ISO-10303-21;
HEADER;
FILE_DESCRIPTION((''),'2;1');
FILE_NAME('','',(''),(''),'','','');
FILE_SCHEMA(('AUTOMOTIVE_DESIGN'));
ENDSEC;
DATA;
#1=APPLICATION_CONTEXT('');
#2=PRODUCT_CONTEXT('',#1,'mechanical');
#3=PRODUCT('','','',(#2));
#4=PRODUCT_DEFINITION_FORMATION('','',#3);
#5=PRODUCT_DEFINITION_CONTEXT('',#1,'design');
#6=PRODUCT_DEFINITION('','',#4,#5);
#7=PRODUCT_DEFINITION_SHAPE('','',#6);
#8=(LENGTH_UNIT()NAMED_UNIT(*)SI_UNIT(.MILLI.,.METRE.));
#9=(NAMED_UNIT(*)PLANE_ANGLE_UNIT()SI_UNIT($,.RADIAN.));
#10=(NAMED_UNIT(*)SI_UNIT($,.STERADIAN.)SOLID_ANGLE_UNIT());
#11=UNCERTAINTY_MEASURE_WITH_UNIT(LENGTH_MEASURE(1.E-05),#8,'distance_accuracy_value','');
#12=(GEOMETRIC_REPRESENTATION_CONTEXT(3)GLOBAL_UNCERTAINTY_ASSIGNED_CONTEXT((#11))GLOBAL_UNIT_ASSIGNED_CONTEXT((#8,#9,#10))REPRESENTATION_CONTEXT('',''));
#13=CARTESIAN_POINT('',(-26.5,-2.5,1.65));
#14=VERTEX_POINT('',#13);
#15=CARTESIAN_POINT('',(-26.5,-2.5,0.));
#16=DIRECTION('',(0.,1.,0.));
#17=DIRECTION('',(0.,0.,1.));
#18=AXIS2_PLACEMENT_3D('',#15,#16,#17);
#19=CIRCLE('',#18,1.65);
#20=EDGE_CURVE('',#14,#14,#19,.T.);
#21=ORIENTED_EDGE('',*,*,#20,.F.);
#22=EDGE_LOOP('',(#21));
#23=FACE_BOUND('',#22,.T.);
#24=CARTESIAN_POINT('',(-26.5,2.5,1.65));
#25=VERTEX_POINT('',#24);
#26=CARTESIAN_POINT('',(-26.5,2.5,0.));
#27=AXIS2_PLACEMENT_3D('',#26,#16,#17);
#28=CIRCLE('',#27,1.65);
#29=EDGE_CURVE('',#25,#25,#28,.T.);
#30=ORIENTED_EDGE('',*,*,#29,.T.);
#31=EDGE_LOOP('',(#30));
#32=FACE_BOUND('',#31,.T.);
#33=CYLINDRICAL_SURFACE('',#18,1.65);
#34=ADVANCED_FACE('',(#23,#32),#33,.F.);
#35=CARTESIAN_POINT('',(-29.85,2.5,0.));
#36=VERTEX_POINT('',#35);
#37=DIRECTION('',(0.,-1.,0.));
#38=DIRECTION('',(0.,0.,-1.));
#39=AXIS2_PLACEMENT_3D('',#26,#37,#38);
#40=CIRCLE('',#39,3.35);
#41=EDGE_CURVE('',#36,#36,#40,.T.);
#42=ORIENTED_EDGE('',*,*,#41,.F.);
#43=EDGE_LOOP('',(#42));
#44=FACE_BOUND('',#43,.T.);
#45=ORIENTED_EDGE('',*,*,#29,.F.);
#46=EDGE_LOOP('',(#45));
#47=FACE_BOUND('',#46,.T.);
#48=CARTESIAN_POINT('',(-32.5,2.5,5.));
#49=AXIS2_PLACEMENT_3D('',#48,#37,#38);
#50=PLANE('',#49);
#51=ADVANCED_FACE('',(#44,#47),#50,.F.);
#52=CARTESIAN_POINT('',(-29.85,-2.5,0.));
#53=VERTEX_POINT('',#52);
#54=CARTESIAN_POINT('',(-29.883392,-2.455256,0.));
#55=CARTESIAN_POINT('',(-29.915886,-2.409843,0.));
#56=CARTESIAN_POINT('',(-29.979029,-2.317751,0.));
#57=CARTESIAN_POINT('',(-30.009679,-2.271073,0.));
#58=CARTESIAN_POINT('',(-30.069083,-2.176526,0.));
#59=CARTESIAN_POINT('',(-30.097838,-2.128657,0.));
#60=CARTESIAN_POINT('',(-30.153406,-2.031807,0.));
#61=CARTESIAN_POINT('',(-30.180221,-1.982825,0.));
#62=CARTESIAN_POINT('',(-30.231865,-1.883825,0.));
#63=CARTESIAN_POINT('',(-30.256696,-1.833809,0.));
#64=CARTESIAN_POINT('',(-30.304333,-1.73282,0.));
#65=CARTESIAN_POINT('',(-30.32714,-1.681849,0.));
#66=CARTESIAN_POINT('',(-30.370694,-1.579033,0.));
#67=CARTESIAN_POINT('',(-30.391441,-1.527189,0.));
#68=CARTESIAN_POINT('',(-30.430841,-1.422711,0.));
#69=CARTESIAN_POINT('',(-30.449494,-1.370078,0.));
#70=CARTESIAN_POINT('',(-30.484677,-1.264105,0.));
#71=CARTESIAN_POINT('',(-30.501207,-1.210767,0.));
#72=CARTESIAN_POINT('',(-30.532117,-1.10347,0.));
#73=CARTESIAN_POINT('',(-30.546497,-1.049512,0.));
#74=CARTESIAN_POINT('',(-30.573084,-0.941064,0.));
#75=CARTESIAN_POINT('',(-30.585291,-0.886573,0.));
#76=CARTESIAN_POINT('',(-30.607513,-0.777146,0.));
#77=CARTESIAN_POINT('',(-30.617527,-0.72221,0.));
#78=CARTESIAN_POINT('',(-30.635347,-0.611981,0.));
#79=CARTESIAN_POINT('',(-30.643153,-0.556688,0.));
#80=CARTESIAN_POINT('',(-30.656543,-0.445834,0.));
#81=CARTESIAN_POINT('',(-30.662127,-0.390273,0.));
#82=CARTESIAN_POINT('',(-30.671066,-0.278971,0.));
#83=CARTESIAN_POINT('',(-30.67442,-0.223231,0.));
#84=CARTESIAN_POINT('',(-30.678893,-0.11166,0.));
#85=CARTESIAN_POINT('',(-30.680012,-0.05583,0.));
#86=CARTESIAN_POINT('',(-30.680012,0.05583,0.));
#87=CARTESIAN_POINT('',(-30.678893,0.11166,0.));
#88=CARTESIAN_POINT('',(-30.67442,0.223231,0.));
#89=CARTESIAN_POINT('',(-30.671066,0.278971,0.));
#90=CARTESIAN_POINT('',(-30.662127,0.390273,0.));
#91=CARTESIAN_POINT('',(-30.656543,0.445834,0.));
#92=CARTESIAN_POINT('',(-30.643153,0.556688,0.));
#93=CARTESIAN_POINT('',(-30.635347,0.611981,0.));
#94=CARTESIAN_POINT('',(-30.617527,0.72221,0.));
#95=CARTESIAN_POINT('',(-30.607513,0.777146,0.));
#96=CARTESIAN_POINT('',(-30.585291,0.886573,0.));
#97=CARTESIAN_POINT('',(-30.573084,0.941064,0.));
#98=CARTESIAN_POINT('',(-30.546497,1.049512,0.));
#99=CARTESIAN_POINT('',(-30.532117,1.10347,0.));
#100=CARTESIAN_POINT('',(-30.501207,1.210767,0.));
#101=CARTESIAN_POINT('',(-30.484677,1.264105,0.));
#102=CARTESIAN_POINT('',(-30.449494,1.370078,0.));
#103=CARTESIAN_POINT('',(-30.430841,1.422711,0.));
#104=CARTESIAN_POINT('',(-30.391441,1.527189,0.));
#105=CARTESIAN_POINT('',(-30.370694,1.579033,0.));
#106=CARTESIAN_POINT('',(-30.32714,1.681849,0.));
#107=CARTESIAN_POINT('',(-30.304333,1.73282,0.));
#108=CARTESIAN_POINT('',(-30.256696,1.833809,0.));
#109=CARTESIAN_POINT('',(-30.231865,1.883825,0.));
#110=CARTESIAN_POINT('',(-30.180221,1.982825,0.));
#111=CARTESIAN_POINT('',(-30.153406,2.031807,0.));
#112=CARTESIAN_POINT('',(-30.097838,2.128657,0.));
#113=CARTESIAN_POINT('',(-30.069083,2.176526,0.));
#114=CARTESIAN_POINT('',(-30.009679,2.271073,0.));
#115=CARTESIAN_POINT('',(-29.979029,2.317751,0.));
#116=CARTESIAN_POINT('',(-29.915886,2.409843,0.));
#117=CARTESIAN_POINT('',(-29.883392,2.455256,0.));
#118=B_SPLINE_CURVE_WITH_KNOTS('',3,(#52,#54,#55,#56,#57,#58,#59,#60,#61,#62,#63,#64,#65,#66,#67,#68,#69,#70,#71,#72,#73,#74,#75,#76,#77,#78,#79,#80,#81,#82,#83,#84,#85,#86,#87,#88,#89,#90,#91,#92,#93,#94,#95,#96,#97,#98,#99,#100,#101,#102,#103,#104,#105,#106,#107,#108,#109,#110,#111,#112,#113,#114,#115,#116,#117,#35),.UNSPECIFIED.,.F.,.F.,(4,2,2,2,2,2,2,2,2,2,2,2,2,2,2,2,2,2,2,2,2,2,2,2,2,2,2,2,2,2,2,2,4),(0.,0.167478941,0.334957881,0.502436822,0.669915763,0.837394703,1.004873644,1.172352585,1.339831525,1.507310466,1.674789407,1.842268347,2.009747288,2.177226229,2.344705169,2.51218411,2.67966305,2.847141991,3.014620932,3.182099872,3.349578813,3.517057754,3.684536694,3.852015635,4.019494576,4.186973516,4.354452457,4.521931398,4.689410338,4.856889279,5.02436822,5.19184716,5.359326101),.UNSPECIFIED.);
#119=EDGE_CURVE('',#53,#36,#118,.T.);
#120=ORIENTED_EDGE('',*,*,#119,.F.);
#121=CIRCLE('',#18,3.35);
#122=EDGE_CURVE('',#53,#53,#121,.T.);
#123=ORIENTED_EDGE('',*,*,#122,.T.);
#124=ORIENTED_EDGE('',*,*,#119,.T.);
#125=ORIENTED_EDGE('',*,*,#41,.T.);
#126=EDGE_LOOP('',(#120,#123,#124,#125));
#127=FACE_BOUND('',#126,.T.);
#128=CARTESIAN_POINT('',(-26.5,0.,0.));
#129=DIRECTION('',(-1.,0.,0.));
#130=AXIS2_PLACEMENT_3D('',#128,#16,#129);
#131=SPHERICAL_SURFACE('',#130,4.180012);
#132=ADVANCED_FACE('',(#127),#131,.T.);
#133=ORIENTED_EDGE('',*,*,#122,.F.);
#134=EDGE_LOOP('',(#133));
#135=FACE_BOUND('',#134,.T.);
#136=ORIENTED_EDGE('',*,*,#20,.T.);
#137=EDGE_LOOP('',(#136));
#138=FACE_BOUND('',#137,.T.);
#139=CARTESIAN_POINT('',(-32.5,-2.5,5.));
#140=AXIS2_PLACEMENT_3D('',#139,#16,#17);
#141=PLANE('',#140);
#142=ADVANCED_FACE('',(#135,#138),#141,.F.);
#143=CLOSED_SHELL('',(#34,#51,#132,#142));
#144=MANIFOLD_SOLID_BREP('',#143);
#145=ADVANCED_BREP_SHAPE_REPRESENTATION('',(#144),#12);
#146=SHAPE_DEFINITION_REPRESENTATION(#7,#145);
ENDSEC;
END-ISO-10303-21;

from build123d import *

# Parameters (mm, degrees)
SKETCH1_W           = 65
SKETCH1_H           = 5
BOSS_EXTRUDE1_DEPTH = 5
SKETCH3_R           = 1.65
CUT_EXTRUDE2_DEPTH  = 32.364560159


# Read off the part's stored shape, not the designer's step: Cut-Revolve1
with BuildPart() as part:
    # Sketch1 → Boss-Extrude1 (new, symmetric)
    with BuildSketch(Plane.XY):
        Rectangle(SKETCH1_W, SKETCH1_H)
    extrude(amount=BOSS_EXTRUDE1_DEPTH, both=True)

    # Cut-Revolve1 outline → Cut-Revolve1 (revolve, cut)
    with BuildSketch(Plane.YX):
        with BuildLine():
            Line((5.590169944, -32.5), (5.590169944, 32.5))
            Line((5.590169944, 32.5), (0, 32.5))
            Line((0, 32.5), (0, -22.319988038))
            ThreePointArc((0, -22.319988038), (4.180011962, -26.5), (0, -30.680011962))
            Line((0, -30.680011962), (0, -32.5))
            Line((0, -32.5), (5.590169944, -32.5))
        make_face()
    revolve(axis=Axis((0, 0, 0), (1, 0, 0)), mode=Mode.SUBTRACT)

    # Sketch3 → Cut-Extrude2 (cut, through all)
    with BuildSketch(Plane(origin=(0, 2.5, 0), x_dir=(1, 0, 0), z_dir=(0, 1, 0))):
        with Locations(Location((-26.5, 0, 0), (0, 0, 270))):
            Circle(SKETCH3_R)
    extrude(amount=-CUT_EXTRUDE2_DEPTH, mode=Mode.SUBTRACT)


solid = part.part
